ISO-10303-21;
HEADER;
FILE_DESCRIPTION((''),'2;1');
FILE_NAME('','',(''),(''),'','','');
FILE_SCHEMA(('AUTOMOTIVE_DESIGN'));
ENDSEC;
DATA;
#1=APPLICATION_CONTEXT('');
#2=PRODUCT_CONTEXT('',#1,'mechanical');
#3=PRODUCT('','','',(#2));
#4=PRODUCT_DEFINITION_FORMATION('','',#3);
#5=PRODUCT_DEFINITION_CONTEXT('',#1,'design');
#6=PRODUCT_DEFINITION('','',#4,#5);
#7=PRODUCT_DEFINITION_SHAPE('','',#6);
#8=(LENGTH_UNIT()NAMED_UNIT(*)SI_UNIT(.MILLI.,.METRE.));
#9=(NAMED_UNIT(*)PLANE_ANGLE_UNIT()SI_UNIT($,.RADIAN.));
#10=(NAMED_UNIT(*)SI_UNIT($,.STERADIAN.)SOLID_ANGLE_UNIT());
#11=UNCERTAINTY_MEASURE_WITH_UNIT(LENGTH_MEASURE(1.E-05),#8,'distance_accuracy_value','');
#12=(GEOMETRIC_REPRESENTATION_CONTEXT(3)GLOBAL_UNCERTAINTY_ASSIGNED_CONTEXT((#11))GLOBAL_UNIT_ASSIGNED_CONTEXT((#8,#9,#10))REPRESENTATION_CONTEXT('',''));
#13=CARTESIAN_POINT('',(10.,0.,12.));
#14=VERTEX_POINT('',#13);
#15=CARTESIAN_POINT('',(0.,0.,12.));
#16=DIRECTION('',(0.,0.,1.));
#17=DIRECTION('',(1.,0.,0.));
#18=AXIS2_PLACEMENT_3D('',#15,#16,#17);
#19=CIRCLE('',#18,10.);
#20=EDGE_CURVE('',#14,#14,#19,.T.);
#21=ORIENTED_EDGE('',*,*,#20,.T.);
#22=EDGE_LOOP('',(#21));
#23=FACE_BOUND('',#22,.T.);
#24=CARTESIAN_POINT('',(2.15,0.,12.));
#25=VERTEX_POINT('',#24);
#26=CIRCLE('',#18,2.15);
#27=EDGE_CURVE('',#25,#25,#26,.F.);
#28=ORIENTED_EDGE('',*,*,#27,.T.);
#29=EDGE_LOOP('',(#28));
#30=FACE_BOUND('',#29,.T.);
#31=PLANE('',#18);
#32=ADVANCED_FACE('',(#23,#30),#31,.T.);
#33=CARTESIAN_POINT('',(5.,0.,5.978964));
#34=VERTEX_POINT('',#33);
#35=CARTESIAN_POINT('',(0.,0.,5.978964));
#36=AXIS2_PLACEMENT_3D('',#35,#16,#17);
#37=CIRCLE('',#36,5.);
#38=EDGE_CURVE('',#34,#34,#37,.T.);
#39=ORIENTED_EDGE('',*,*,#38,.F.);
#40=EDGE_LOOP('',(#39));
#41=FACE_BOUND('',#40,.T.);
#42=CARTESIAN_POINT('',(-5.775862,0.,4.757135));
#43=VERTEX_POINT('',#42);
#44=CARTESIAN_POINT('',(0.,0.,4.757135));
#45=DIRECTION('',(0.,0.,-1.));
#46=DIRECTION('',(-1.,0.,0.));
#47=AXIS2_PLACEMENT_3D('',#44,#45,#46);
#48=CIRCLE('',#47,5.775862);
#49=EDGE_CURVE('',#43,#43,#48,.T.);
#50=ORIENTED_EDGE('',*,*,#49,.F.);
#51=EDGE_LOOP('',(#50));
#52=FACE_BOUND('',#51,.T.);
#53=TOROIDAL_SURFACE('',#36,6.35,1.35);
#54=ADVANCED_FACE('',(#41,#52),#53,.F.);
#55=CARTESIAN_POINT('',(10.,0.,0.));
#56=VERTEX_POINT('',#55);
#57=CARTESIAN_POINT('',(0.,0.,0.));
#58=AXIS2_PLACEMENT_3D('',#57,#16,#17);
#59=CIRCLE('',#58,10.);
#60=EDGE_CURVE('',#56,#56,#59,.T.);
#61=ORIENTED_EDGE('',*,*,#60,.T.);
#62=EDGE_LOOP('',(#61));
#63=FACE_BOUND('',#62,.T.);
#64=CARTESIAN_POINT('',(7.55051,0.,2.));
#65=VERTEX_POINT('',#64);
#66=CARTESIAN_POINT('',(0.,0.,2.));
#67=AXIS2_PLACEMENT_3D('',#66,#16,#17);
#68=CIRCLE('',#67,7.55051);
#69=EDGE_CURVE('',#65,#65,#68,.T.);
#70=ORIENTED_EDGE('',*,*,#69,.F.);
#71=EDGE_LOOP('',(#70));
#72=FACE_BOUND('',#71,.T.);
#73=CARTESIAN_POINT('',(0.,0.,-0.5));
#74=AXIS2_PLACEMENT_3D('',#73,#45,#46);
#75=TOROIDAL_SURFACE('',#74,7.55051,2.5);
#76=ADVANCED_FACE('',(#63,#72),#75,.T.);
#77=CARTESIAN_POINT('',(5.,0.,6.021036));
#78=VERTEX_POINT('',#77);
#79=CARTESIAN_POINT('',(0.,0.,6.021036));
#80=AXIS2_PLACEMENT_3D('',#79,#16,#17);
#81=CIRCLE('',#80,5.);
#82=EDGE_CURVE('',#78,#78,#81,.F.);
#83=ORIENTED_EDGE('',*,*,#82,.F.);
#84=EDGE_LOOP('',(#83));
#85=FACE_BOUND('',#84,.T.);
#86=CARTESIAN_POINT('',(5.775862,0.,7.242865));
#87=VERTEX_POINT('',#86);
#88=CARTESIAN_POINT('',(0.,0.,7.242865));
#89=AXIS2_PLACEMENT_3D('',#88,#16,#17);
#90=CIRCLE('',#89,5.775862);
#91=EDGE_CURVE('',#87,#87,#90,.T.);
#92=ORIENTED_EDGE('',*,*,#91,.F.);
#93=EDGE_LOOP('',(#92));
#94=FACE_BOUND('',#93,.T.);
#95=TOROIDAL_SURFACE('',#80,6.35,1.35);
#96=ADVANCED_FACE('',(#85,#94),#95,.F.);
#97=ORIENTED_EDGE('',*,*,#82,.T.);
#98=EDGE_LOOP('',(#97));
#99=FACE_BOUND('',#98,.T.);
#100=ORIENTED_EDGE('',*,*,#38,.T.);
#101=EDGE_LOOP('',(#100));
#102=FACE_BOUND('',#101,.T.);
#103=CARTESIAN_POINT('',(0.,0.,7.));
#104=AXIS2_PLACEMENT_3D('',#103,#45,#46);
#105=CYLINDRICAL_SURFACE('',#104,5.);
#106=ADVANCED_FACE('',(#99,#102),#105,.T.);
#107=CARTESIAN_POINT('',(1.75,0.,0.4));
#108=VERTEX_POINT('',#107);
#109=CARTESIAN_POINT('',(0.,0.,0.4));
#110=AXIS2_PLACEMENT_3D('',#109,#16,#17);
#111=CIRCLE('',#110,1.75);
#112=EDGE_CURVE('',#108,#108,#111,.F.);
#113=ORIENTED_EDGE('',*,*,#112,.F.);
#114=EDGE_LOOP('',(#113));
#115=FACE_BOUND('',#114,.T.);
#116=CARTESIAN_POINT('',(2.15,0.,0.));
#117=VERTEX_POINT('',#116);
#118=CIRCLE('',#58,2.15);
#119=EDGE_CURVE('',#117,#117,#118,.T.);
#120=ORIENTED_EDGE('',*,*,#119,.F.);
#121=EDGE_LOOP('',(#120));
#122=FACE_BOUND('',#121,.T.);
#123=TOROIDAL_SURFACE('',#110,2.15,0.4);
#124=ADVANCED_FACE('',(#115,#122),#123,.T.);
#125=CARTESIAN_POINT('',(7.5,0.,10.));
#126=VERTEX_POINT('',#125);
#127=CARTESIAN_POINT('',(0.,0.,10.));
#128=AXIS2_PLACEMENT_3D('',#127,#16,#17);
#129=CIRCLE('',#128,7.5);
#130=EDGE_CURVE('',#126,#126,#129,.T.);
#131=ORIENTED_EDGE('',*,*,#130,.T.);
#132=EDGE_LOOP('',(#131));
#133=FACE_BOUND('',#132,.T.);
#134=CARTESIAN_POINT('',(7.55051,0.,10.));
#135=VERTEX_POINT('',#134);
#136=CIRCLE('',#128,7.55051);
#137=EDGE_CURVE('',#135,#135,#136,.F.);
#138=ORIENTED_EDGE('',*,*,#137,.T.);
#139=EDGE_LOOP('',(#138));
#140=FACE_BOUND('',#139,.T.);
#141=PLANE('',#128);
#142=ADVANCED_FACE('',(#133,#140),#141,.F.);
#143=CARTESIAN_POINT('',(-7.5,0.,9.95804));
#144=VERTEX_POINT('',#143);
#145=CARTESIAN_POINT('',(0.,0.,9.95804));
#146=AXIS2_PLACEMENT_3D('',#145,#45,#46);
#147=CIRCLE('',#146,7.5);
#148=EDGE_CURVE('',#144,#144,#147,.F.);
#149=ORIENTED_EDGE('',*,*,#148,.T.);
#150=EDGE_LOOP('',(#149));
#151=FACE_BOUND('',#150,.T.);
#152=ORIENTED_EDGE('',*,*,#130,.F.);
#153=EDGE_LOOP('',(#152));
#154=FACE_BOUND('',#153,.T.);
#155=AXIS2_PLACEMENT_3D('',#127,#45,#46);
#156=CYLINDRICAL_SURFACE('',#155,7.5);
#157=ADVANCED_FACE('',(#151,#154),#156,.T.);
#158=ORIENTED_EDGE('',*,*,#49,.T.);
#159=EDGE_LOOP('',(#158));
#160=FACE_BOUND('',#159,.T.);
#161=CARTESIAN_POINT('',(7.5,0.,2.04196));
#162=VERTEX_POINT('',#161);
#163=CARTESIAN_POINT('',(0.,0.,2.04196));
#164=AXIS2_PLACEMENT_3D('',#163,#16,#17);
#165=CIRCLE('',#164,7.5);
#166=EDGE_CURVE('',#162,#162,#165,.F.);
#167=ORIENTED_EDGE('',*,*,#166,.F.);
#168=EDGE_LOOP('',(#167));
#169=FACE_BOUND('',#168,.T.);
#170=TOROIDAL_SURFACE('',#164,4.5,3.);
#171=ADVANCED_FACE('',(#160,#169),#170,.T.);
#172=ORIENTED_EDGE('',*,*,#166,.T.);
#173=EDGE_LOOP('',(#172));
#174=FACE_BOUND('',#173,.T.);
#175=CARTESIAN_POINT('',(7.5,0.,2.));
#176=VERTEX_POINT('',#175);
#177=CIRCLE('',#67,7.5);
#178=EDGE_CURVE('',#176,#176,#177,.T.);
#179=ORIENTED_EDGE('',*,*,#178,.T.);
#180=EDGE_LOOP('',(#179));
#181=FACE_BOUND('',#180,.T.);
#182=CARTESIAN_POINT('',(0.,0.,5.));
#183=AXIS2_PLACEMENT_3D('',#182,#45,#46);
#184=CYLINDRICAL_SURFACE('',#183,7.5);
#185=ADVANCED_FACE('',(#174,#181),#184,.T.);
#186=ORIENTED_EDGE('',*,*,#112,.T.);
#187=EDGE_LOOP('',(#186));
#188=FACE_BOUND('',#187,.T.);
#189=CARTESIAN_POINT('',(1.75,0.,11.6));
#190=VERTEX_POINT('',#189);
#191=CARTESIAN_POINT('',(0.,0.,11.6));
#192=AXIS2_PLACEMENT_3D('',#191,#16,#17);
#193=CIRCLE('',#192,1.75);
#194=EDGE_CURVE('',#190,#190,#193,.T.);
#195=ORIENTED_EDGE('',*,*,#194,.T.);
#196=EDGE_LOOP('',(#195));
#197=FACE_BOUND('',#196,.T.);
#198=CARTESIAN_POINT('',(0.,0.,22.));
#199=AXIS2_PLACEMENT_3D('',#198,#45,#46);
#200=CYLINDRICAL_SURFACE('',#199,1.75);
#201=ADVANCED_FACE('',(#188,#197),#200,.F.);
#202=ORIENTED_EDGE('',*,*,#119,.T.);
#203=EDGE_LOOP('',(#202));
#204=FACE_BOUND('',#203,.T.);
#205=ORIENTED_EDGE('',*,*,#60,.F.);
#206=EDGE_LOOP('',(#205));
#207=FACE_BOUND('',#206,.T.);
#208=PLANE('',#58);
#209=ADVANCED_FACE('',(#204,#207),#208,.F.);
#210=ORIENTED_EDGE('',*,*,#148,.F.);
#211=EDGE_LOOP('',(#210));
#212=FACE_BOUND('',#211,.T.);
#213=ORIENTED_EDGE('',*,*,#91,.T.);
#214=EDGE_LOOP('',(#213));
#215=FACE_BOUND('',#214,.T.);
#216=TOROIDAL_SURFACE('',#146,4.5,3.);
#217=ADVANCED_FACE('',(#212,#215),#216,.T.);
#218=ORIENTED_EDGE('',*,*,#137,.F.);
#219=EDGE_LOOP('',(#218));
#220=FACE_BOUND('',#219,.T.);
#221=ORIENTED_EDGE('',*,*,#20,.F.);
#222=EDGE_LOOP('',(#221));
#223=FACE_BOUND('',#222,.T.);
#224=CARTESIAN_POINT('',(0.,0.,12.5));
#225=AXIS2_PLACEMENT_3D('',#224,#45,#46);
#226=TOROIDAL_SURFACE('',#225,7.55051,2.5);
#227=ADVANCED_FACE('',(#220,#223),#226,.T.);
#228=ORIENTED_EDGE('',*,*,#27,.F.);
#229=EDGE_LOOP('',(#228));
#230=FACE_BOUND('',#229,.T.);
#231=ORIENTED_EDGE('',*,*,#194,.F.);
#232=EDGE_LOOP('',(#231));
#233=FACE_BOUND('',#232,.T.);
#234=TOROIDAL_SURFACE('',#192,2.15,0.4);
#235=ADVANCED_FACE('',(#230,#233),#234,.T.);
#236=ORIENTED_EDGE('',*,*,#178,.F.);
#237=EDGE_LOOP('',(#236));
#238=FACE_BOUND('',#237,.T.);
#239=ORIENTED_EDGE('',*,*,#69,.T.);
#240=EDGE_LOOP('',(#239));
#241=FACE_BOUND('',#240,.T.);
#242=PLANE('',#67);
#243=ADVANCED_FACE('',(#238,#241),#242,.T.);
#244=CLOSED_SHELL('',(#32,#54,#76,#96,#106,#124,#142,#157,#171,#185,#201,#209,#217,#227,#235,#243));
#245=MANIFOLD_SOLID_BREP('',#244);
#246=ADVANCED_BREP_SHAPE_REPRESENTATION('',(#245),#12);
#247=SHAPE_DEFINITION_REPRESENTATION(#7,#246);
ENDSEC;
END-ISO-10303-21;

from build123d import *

# Parameters (mm, degrees)
SKETCH_1_R          = 10
EXTRUDE_1_DEPTH     = 2
SKETCH_2_R          = 7.5
EXTRUDE_2_DEPTH     = 3
SKETCH_3_R          = 5
EXTRUDE_3_DEPTH     = 2
SKETCH_4_R          = 7.5
EXTRUDE_4_DEPTH     = 3
SKETCH_5_R          = 10
EXTRUDE_5_DEPTH     = 2
SKETCH_6_R          = 1.75
CUT_EXTRUDE_1_DEPTH = 22
FILLET_1_R          = 3
FILLET_3_R          = 1.35
FILLET_4_R          = 0.4
FILLET_5_R          = 2.5


with BuildPart() as part:
    # 草图1 → 凸台-拉伸1 (new body)
    with BuildSketch(Plane.XY):
        Circle(SKETCH_1_R)
    extrude(amount=EXTRUDE_1_DEPTH)

    # 草图2 → 凸台-拉伸2 (add)
    with BuildSketch(Plane.XY.offset(2)):
        Circle(SKETCH_2_R)
    extrude(amount=EXTRUDE_2_DEPTH)

    # 草图3 → 凸台-拉伸3 (add)
    with BuildSketch(Plane.XY.offset(5)):
        Circle(SKETCH_3_R)
    extrude(amount=EXTRUDE_3_DEPTH)

    # 草图4 → 凸台-拉伸4 (add)
    with BuildSketch(Plane.XY.offset(7)):
        Circle(SKETCH_4_R)
    extrude(amount=EXTRUDE_4_DEPTH)

    # 草图5 → 凸台-拉伸5 (add)
    with BuildSketch(Plane.XY.offset(10)):
        Circle(SKETCH_5_R)
    extrude(amount=EXTRUDE_5_DEPTH)

    # 草图6 → 切除-拉伸1 (cut)
    with BuildSketch(Plane(origin=(0, 0, 0), x_dir=(-1, 0, 0), z_dir=(0, 0, -1))):
        Circle(SKETCH_6_R)
    extrude(amount=-CUT_EXTRUDE_1_DEPTH, mode=Mode.SUBTRACT)

    # 圆角1
    # the kernel refuses this fillet: 3 mm, written as the material it takes off along each edge
    with BuildSketch(Plane(origin=(0, 0, 7), x_dir=(1, 0, 0), z_dir=(0, -1, 0))) as fillet_1_piece_1:
        with BuildLine():
            CenterArc((4.5, 2.958039892), FILLET_1_R, 279.594068227, 80.405931773)
            Line((5, 0), (5.01, -0.059160798))
            ThreePointArc((5.01, -0.059160798), (6.25, -0.06), (7.5, -0.06))
            Line((7.5, -0.06), (7.56, 0))
            Line((7.56, 0), (7.56, 2.958039892))
            Line((7.56, 2.958039892), (7.5, 2.958039892))
        make_face()
    revolve(axis=Axis((0, 0, 7), (0, 0, 1)), mode=Mode.SUBTRACT)
    with BuildSketch(Plane(origin=(0, 0, 5), x_dir=(1, 0, 0), z_dir=(0, -1, 0))) as fillet_1_piece_2:
        with BuildLine():
            CenterArc((4.5, -2.958039892), FILLET_1_R, 0, 80.405931773)
            Line((7.5, -2.958039892), (7.56, -2.958039892))
            Line((7.56, -2.958039892), (7.56, 0))
            Line((7.56, 0), (7.5, 0.06))
            ThreePointArc((7.5, 0.06), (6.25, 0.06), (5.01, 0.059160798))
            Line((5.01, 0.059160798), (5, 0))
        make_face()
    revolve(axis=Axis((0, 0, 5), (0, 0, 1)), mode=Mode.SUBTRACT)

    # 圆角3
    fillet_3_edges = [part.edges().sort_by_distance(p)[0] for p in [
        (-5, 0, 7),
        (-5, 0, 5),
    ]]
    fillet(fillet_3_edges, radius=FILLET_3_R)

    # 圆角4
    fillet_4_edges = [part.edges().sort_by_distance(p)[0] for p in [
        (1.75, 0, 12),
        (1.75, 0, 0),
    ]]
    fillet(fillet_4_edges, radius=FILLET_4_R)

    # 圆角5
    # the kernel refuses this fillet: 2.5 mm, written as the material it takes off along each edge
    with BuildSketch(Plane(origin=(0, 0, 10), x_dir=(1, 0, 0), z_dir=(0, -1, 0))) as fillet_5_piece_1:
        with BuildLine():
            CenterArc((7.550510257, 2.5), FILLET_5_R, 270, 78.463040967)
            Line((7.550510257, 0), (7.550510257, -0.05))
            Line((7.550510257, -0.05), (10, -0.05))
            Line((10, -0.05), (10.05, 0))
            ThreePointArc((10.05, 0), (10.05, 1), (10.048989795, 1.99))
            Line((10.048989795, 1.99), (10, 2))
        make_face()
    revolve(axis=Axis((0, 0, 10), (0, 0, 1)), mode=Mode.SUBTRACT)
    with BuildSketch(Plane(origin=(0, 0, 2), x_dir=(1, 0, 0), z_dir=(0, -1, 0))) as fillet_5_piece_2:
        with BuildLine():
            CenterArc((7.550510257, -2.5), FILLET_5_R, 11.536959033, 78.463040967)
            Line((7.550510257, 0), (7.550510257, 0.05))
            Line((7.550510257, 0.05), (10, 0.05))
            Line((10, 0.05), (10.05, 0))
            ThreePointArc((10.05, 0), (10.05, -1), (10.048989795, -1.99))
            Line((10.048989795, -1.99), (10, -2))
        make_face()
    revolve(axis=Axis((0, 0, 2), (0, 0, 1)), mode=Mode.SUBTRACT)


solid = part.part
